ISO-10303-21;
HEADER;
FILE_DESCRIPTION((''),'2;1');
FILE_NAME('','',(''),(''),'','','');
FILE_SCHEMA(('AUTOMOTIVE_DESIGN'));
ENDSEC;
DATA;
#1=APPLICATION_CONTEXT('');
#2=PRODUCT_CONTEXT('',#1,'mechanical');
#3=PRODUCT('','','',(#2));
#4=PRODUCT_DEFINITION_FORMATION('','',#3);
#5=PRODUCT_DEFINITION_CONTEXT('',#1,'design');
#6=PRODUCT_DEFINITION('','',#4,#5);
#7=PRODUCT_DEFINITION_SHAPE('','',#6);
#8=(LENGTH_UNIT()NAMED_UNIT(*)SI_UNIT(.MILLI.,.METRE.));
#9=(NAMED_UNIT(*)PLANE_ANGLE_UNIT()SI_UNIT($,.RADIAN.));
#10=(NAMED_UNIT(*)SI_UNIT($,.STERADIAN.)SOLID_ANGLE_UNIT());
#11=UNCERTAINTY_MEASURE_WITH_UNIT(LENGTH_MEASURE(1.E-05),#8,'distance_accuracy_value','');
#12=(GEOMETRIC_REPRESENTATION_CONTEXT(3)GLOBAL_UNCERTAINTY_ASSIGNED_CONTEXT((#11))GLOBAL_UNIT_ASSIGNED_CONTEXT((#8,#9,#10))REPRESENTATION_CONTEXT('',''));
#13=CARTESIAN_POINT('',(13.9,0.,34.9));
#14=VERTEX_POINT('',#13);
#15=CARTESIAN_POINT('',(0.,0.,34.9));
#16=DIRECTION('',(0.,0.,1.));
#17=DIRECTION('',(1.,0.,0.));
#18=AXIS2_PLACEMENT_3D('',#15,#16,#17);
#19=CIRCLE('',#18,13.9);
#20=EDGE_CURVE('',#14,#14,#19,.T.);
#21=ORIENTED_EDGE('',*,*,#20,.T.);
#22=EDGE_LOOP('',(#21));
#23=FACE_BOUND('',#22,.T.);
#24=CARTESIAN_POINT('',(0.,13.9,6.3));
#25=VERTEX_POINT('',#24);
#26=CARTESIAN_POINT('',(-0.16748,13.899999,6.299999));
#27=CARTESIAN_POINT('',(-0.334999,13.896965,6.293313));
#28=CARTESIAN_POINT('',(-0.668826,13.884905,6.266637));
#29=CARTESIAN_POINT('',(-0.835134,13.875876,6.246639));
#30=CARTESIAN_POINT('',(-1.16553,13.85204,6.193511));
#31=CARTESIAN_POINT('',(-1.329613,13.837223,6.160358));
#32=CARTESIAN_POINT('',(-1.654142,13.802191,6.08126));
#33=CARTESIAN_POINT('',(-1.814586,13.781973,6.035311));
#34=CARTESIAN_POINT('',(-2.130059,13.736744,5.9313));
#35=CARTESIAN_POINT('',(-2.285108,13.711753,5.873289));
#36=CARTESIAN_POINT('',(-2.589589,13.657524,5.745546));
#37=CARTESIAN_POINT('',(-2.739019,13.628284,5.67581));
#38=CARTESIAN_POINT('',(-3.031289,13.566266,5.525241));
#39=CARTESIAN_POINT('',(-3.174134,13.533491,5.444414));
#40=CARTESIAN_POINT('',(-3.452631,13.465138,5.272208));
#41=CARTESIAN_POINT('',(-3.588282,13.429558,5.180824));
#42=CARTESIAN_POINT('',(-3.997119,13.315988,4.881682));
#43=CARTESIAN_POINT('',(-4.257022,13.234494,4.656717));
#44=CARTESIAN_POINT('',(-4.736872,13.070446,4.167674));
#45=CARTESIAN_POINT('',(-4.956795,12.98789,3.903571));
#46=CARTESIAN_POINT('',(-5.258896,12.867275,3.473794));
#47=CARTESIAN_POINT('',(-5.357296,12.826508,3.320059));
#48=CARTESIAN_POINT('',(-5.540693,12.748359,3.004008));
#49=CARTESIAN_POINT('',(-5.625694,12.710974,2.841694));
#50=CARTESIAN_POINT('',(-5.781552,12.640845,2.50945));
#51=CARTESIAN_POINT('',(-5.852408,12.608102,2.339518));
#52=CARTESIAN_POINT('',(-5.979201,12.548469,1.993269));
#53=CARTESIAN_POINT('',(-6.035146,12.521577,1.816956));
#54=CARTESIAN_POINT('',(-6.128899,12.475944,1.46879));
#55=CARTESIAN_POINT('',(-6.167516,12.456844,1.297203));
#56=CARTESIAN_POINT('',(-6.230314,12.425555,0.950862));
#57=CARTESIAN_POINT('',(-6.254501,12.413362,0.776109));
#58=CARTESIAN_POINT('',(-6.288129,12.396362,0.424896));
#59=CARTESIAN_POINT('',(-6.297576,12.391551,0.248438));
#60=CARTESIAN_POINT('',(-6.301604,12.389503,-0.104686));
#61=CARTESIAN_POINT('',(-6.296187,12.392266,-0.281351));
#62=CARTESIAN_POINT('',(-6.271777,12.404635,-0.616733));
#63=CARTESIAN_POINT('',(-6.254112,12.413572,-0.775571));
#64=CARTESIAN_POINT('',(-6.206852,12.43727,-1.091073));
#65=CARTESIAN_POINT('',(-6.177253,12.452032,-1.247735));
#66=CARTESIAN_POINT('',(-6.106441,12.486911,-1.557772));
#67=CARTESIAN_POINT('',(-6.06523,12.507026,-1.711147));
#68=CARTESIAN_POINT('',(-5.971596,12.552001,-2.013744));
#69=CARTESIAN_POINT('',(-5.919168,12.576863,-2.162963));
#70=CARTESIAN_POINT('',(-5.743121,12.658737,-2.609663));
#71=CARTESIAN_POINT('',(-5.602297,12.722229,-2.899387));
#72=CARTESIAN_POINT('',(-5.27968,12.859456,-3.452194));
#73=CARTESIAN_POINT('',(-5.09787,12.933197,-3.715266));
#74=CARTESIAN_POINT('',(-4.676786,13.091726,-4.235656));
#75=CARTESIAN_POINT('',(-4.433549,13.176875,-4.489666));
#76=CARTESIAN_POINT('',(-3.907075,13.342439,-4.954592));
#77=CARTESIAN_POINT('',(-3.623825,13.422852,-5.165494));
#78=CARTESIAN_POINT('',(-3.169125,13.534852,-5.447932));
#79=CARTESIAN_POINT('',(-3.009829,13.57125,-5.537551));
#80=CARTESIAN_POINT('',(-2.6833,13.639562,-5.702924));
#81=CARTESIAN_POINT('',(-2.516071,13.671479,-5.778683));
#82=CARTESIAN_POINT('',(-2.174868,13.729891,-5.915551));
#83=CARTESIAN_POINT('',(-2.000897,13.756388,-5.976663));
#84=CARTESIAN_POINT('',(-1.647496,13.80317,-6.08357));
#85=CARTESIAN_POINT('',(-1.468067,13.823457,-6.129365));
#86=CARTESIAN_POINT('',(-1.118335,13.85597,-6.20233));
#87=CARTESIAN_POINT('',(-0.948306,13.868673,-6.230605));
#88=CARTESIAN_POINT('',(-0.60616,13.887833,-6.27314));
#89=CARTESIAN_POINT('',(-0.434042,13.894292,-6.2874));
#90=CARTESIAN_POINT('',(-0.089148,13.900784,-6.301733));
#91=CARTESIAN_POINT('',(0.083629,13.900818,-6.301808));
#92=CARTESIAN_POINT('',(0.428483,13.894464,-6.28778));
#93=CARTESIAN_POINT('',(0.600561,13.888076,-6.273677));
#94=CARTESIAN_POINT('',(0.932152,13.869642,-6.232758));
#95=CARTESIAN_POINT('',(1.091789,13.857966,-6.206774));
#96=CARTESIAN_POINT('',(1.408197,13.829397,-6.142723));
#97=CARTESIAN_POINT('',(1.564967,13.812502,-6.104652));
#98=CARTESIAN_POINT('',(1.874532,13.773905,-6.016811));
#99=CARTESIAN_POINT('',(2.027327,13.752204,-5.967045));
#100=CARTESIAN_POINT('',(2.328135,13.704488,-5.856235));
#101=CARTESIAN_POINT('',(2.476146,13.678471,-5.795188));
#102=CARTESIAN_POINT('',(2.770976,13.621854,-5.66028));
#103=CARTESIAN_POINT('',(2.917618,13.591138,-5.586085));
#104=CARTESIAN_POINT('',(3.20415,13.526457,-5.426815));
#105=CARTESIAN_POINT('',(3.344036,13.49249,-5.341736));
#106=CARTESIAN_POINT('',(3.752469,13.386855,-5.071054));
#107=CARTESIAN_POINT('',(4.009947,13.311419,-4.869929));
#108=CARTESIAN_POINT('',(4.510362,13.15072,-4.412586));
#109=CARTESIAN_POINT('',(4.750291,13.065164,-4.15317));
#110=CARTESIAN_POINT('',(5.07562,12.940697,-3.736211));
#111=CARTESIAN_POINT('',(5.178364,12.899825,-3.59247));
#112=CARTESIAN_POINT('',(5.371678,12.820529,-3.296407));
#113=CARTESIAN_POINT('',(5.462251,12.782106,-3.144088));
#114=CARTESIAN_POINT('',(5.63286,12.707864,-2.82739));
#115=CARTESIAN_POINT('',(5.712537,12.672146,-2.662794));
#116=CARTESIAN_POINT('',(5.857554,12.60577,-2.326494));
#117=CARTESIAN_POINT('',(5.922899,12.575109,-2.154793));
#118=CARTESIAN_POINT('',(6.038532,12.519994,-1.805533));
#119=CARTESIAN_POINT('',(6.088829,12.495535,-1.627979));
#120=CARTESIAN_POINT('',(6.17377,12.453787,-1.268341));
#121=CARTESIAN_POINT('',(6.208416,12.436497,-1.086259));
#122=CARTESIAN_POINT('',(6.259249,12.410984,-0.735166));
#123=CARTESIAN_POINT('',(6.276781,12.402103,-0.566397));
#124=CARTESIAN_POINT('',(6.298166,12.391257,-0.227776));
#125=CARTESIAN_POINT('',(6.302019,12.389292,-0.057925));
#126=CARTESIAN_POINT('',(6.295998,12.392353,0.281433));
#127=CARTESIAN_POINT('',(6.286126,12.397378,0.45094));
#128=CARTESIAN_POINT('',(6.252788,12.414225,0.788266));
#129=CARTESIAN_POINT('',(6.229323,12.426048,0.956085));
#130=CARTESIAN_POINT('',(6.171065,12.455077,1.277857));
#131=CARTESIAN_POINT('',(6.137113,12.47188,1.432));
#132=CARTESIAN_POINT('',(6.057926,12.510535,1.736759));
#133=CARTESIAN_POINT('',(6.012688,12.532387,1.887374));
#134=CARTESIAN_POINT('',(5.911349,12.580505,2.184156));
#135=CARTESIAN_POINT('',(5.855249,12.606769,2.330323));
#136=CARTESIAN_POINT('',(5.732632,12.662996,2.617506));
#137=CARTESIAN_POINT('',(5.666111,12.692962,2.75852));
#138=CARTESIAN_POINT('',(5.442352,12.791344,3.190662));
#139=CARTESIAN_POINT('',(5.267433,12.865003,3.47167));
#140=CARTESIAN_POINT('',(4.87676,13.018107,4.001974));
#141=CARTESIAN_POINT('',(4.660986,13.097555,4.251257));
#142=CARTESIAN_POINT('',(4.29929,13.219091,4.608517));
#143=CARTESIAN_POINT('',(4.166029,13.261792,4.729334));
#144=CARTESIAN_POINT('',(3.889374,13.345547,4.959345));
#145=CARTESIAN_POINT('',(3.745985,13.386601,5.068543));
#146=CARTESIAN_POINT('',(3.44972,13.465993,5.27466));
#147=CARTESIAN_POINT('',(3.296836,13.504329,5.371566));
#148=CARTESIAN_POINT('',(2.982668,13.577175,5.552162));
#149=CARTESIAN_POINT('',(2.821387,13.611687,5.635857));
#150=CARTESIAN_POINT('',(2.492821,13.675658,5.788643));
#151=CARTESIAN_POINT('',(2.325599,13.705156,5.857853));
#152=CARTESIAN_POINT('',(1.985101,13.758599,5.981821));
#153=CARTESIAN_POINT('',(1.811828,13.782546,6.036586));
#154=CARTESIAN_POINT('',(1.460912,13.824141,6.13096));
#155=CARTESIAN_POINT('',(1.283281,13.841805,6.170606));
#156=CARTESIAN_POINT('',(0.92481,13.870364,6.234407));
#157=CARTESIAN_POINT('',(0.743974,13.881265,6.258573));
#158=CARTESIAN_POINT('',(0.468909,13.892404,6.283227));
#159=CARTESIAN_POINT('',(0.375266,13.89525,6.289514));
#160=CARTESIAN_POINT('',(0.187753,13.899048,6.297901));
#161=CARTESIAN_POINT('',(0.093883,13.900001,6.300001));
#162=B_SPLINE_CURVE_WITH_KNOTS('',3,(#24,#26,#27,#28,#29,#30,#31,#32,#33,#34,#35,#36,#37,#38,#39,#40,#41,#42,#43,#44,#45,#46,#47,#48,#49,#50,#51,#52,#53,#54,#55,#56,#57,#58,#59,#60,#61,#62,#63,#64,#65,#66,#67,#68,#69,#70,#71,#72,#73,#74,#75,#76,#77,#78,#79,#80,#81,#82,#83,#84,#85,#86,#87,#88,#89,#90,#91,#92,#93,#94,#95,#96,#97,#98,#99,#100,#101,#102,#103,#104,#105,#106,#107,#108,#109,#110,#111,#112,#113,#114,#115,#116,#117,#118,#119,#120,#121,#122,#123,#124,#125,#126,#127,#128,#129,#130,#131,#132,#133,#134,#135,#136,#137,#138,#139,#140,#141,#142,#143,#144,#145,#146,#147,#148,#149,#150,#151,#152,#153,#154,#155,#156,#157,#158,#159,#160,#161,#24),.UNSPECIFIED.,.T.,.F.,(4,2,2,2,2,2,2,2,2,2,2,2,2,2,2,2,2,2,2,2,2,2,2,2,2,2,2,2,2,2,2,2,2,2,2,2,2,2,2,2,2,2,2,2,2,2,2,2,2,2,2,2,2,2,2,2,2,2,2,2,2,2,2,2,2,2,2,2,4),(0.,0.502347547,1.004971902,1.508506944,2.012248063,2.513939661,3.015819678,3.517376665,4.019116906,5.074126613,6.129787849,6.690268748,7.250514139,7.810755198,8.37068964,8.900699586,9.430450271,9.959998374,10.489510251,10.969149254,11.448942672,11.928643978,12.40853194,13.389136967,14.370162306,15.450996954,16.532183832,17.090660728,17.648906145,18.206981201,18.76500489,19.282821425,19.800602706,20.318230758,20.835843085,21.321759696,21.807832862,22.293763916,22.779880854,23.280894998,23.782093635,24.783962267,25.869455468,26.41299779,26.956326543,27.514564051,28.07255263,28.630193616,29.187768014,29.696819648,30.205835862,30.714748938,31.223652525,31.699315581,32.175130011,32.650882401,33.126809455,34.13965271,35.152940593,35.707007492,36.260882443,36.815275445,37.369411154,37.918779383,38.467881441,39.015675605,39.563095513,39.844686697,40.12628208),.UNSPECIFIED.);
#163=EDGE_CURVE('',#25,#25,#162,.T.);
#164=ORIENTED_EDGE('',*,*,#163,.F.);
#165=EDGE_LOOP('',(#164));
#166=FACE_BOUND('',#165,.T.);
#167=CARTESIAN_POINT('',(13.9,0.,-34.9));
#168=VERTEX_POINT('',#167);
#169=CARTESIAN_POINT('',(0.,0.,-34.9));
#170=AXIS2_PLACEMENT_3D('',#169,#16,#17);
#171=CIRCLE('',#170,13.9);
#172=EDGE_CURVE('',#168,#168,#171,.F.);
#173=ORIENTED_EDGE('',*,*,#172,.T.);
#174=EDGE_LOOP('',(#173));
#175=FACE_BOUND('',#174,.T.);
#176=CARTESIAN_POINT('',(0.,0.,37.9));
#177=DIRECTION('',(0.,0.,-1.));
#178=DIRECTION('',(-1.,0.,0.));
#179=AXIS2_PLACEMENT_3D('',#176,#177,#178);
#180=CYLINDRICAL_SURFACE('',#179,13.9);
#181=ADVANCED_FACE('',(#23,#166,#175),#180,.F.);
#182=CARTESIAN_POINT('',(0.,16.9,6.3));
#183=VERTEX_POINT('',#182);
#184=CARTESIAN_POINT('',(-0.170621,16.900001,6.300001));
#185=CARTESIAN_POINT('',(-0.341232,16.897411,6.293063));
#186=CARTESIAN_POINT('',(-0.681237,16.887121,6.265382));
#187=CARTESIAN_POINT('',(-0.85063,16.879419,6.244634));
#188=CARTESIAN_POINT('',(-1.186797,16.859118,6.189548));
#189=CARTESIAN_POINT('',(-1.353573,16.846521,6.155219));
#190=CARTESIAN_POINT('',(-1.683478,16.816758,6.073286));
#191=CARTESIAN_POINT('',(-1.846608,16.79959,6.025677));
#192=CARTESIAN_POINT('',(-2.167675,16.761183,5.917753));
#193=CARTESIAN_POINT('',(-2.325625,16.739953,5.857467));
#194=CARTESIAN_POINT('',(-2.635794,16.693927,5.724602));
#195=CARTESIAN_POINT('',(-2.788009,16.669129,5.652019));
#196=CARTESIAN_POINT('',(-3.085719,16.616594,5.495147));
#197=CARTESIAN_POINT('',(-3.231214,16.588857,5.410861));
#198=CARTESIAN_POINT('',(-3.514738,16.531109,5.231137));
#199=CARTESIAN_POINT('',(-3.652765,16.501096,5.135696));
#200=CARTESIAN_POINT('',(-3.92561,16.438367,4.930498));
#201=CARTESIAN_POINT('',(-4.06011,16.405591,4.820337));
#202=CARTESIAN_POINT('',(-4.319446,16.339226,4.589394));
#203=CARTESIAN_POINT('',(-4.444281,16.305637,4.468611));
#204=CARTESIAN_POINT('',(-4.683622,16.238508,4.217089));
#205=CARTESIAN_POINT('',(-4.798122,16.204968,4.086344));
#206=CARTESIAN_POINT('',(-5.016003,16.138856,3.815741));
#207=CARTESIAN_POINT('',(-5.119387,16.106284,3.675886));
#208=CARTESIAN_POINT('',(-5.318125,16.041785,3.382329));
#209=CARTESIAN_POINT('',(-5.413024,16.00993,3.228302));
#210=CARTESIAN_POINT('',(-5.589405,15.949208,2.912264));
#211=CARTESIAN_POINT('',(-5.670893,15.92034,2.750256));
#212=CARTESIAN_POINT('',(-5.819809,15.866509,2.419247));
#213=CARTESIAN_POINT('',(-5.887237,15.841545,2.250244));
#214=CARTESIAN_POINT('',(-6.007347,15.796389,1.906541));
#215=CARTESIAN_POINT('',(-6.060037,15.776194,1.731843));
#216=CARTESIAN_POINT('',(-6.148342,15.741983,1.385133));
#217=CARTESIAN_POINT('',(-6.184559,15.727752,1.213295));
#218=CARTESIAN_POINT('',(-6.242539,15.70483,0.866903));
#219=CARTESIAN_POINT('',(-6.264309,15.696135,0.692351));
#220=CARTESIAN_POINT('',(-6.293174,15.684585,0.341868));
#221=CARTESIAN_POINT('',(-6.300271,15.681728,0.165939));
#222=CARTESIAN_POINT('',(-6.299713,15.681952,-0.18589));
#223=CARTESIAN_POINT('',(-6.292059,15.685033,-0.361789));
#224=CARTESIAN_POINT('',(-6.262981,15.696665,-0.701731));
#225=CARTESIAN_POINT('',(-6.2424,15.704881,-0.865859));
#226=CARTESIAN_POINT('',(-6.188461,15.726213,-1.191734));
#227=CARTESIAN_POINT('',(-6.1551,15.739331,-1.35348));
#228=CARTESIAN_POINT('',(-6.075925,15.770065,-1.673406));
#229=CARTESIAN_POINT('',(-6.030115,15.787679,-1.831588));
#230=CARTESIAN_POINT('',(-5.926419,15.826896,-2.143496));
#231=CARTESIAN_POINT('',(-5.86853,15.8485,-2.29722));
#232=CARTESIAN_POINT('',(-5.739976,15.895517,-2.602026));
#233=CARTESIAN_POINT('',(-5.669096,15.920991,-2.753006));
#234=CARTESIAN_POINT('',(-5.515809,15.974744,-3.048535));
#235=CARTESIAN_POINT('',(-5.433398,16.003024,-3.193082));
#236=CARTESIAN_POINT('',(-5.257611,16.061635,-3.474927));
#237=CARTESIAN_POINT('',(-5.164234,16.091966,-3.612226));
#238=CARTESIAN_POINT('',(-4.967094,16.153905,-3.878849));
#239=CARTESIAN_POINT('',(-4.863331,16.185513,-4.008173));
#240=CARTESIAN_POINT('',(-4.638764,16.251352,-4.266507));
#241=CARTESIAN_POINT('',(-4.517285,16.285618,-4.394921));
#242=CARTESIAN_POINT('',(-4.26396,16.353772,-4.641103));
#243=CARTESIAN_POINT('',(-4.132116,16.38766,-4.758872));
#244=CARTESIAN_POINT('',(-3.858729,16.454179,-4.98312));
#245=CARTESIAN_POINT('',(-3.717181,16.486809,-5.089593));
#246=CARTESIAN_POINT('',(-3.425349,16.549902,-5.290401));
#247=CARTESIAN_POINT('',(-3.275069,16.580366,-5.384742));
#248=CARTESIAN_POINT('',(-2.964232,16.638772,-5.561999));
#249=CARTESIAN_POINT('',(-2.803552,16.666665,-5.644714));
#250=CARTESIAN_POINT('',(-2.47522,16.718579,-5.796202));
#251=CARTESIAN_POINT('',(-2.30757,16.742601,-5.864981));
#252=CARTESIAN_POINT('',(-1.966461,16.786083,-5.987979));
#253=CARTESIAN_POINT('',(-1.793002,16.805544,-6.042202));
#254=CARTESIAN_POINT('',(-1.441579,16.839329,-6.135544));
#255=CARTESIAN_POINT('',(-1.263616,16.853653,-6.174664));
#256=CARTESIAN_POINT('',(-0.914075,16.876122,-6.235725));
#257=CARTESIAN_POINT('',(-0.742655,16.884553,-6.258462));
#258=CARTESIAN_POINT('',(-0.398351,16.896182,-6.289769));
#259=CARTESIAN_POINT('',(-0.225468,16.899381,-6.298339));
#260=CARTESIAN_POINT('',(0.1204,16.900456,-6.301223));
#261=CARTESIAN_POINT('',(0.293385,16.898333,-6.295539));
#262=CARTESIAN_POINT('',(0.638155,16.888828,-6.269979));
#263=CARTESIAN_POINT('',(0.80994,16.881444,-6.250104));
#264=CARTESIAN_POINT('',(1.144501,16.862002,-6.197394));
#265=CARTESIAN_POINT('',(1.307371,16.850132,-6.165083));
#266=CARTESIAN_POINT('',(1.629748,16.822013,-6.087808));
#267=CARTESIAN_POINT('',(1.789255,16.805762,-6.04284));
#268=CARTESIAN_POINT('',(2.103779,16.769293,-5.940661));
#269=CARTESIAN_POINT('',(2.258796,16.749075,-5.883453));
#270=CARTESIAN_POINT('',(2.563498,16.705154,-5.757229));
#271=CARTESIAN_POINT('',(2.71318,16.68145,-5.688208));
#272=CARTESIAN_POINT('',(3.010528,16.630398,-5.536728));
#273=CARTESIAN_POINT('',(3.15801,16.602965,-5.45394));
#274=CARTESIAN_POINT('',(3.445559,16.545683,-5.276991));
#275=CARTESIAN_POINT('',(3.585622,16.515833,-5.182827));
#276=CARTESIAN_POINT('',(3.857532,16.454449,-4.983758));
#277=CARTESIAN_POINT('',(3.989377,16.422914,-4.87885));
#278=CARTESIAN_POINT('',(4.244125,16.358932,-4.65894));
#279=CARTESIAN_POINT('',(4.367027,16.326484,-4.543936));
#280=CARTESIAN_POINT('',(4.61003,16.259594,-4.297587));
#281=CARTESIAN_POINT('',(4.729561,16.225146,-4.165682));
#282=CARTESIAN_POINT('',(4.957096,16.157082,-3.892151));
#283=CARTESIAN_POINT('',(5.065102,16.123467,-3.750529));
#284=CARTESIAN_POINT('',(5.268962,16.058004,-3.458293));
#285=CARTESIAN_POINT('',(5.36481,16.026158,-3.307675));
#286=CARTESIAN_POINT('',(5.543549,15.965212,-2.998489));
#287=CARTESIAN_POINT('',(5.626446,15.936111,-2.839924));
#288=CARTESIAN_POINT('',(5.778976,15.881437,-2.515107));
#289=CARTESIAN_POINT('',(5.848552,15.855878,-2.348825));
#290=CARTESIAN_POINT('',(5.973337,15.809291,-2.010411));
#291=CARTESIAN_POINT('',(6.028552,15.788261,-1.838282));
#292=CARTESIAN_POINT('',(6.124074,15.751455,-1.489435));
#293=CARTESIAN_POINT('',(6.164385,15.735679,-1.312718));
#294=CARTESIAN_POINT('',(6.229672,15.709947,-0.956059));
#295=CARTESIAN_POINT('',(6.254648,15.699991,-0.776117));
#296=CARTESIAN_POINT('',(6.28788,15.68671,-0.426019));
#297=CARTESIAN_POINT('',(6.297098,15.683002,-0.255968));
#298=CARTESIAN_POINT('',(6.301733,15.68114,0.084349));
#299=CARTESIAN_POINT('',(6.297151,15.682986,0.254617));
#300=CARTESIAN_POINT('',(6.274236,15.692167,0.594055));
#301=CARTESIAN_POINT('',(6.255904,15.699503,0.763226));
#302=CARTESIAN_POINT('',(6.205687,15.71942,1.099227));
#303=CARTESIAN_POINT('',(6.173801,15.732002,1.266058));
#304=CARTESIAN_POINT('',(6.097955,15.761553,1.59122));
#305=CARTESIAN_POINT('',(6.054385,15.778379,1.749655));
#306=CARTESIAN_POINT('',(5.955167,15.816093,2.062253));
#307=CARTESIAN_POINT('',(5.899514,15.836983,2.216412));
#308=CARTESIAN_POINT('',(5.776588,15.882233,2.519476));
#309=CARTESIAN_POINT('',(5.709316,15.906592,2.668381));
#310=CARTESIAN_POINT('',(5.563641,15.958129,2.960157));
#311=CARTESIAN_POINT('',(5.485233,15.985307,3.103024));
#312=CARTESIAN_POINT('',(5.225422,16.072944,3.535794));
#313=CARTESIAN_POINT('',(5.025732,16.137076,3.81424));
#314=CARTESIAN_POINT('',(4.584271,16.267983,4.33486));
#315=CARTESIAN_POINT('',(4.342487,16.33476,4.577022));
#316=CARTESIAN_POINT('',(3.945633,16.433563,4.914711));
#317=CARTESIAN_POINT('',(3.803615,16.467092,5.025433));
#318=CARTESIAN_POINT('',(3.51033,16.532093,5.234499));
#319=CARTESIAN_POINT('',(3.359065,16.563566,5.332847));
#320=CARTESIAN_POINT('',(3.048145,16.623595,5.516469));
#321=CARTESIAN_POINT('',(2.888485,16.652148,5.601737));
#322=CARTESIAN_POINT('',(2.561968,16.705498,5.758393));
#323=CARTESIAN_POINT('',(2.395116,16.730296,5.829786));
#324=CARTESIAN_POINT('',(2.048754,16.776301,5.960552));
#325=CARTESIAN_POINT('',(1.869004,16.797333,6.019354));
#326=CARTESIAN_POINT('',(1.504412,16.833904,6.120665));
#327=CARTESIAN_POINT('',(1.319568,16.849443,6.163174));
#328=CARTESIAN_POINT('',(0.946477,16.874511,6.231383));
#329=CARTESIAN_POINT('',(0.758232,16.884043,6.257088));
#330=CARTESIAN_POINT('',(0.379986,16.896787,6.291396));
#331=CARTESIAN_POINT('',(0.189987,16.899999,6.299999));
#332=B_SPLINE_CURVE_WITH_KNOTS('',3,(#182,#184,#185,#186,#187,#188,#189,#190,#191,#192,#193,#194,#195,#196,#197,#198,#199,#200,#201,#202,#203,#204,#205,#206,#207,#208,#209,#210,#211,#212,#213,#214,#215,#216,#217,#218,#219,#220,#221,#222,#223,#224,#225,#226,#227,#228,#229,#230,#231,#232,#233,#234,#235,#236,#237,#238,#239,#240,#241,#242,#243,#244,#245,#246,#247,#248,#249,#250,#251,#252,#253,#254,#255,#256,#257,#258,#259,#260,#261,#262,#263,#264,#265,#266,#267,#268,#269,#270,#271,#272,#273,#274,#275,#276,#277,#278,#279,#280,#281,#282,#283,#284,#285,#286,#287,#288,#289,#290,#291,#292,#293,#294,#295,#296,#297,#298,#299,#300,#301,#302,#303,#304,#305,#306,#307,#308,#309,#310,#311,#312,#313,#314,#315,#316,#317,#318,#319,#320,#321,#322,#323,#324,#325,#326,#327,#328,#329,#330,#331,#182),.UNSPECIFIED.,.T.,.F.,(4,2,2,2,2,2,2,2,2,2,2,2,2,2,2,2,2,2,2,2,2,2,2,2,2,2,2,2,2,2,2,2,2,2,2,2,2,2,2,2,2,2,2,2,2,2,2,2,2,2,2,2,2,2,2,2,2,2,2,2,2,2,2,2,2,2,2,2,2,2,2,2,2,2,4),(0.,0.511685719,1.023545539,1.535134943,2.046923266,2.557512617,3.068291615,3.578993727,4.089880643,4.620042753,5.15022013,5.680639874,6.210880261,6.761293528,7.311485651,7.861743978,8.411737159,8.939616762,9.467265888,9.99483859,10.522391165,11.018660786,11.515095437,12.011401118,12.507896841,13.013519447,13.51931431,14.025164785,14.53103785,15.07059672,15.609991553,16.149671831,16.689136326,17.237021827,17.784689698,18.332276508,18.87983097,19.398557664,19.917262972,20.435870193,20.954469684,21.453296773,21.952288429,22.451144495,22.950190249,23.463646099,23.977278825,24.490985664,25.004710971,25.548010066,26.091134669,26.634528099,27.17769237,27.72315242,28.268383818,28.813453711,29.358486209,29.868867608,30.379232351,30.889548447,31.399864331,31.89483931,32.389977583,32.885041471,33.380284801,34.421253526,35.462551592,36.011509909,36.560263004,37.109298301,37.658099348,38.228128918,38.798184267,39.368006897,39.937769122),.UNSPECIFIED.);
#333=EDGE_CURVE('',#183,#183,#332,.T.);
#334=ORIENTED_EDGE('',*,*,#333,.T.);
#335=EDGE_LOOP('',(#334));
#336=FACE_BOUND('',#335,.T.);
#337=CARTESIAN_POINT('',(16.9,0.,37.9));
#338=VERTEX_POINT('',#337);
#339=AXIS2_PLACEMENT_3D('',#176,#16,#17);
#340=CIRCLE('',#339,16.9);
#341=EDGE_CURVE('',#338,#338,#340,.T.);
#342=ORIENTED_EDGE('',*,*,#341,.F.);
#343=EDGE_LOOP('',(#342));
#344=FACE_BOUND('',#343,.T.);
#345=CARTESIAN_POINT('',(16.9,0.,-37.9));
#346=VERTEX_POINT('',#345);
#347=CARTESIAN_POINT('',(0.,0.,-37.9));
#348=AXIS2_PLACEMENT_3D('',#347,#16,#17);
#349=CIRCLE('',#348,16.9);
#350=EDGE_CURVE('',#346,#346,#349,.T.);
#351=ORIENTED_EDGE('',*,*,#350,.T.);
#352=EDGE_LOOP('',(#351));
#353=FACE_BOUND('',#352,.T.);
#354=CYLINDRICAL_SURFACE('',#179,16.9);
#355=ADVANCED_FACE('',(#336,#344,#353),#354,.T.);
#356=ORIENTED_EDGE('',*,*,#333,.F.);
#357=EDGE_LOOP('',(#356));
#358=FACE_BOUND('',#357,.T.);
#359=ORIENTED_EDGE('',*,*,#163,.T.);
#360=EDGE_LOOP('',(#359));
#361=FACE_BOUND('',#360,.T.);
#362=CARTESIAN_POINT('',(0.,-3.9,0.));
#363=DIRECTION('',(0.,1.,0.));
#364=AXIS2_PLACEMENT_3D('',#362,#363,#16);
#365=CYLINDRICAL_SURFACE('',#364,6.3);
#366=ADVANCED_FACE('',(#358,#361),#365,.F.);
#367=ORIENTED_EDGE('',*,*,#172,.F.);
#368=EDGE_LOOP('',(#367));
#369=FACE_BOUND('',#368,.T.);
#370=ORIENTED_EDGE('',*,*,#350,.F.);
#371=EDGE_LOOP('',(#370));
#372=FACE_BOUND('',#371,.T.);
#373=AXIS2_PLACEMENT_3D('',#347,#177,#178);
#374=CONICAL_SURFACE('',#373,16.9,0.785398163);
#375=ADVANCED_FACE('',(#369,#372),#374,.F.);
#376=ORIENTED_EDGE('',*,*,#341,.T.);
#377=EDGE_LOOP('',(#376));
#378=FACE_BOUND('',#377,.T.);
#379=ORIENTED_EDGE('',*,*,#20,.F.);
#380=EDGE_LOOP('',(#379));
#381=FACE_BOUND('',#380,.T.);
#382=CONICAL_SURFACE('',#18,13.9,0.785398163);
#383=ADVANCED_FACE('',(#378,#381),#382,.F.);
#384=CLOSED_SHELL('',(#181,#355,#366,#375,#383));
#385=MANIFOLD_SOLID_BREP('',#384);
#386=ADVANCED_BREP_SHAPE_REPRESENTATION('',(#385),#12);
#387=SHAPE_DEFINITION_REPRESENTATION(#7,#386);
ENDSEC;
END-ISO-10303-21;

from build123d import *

# Parameters (mm, degrees)
CROQUIS1_R              = 16.9
CROQUIS1_R_2            = 13.9
SALIENTE_EXTRUIR1_DEPTH = 37.9
CROQUIS2_R              = 6.3
CORTAR_EXTRUIR1_DEPTH   = 20.8
CHAFL_N1_SIZE           = 3


with BuildPart() as part:
    # Croquis1 → Saliente-Extruir1 (new, symmetric)
    with BuildSketch(Plane.XY):
        Circle(CROQUIS1_R)
        Circle(CROQUIS1_R_2, mode=Mode.SUBTRACT)
    extrude(amount=SALIENTE_EXTRUIR1_DEPTH, both=True)

    # Croquis2 → Cortar-Extruir1 (cut)
    with BuildSketch(Plane(origin=(0, 16.9, 0), x_dir=(1, 0, 0), z_dir=(0, 1, 0))):
        with Locations(Location((0, 0, 0), (0, 0, 270))):
            Circle(CROQUIS2_R)
    extrude(amount=-CORTAR_EXTRUIR1_DEPTH, mode=Mode.SUBTRACT)

    # Chaflán1
    chafl_n1_edges = [part.edges().sort_by_distance(p)[0] for p in [
        (-13.9, 0, -37.9),
        (-13.9, 0, 37.9),
    ]]
    chamfer(chafl_n1_edges, length=CHAFL_N1_SIZE - 0.0001)  # a hair under: the kernel refuses the full size


solid = part.part
